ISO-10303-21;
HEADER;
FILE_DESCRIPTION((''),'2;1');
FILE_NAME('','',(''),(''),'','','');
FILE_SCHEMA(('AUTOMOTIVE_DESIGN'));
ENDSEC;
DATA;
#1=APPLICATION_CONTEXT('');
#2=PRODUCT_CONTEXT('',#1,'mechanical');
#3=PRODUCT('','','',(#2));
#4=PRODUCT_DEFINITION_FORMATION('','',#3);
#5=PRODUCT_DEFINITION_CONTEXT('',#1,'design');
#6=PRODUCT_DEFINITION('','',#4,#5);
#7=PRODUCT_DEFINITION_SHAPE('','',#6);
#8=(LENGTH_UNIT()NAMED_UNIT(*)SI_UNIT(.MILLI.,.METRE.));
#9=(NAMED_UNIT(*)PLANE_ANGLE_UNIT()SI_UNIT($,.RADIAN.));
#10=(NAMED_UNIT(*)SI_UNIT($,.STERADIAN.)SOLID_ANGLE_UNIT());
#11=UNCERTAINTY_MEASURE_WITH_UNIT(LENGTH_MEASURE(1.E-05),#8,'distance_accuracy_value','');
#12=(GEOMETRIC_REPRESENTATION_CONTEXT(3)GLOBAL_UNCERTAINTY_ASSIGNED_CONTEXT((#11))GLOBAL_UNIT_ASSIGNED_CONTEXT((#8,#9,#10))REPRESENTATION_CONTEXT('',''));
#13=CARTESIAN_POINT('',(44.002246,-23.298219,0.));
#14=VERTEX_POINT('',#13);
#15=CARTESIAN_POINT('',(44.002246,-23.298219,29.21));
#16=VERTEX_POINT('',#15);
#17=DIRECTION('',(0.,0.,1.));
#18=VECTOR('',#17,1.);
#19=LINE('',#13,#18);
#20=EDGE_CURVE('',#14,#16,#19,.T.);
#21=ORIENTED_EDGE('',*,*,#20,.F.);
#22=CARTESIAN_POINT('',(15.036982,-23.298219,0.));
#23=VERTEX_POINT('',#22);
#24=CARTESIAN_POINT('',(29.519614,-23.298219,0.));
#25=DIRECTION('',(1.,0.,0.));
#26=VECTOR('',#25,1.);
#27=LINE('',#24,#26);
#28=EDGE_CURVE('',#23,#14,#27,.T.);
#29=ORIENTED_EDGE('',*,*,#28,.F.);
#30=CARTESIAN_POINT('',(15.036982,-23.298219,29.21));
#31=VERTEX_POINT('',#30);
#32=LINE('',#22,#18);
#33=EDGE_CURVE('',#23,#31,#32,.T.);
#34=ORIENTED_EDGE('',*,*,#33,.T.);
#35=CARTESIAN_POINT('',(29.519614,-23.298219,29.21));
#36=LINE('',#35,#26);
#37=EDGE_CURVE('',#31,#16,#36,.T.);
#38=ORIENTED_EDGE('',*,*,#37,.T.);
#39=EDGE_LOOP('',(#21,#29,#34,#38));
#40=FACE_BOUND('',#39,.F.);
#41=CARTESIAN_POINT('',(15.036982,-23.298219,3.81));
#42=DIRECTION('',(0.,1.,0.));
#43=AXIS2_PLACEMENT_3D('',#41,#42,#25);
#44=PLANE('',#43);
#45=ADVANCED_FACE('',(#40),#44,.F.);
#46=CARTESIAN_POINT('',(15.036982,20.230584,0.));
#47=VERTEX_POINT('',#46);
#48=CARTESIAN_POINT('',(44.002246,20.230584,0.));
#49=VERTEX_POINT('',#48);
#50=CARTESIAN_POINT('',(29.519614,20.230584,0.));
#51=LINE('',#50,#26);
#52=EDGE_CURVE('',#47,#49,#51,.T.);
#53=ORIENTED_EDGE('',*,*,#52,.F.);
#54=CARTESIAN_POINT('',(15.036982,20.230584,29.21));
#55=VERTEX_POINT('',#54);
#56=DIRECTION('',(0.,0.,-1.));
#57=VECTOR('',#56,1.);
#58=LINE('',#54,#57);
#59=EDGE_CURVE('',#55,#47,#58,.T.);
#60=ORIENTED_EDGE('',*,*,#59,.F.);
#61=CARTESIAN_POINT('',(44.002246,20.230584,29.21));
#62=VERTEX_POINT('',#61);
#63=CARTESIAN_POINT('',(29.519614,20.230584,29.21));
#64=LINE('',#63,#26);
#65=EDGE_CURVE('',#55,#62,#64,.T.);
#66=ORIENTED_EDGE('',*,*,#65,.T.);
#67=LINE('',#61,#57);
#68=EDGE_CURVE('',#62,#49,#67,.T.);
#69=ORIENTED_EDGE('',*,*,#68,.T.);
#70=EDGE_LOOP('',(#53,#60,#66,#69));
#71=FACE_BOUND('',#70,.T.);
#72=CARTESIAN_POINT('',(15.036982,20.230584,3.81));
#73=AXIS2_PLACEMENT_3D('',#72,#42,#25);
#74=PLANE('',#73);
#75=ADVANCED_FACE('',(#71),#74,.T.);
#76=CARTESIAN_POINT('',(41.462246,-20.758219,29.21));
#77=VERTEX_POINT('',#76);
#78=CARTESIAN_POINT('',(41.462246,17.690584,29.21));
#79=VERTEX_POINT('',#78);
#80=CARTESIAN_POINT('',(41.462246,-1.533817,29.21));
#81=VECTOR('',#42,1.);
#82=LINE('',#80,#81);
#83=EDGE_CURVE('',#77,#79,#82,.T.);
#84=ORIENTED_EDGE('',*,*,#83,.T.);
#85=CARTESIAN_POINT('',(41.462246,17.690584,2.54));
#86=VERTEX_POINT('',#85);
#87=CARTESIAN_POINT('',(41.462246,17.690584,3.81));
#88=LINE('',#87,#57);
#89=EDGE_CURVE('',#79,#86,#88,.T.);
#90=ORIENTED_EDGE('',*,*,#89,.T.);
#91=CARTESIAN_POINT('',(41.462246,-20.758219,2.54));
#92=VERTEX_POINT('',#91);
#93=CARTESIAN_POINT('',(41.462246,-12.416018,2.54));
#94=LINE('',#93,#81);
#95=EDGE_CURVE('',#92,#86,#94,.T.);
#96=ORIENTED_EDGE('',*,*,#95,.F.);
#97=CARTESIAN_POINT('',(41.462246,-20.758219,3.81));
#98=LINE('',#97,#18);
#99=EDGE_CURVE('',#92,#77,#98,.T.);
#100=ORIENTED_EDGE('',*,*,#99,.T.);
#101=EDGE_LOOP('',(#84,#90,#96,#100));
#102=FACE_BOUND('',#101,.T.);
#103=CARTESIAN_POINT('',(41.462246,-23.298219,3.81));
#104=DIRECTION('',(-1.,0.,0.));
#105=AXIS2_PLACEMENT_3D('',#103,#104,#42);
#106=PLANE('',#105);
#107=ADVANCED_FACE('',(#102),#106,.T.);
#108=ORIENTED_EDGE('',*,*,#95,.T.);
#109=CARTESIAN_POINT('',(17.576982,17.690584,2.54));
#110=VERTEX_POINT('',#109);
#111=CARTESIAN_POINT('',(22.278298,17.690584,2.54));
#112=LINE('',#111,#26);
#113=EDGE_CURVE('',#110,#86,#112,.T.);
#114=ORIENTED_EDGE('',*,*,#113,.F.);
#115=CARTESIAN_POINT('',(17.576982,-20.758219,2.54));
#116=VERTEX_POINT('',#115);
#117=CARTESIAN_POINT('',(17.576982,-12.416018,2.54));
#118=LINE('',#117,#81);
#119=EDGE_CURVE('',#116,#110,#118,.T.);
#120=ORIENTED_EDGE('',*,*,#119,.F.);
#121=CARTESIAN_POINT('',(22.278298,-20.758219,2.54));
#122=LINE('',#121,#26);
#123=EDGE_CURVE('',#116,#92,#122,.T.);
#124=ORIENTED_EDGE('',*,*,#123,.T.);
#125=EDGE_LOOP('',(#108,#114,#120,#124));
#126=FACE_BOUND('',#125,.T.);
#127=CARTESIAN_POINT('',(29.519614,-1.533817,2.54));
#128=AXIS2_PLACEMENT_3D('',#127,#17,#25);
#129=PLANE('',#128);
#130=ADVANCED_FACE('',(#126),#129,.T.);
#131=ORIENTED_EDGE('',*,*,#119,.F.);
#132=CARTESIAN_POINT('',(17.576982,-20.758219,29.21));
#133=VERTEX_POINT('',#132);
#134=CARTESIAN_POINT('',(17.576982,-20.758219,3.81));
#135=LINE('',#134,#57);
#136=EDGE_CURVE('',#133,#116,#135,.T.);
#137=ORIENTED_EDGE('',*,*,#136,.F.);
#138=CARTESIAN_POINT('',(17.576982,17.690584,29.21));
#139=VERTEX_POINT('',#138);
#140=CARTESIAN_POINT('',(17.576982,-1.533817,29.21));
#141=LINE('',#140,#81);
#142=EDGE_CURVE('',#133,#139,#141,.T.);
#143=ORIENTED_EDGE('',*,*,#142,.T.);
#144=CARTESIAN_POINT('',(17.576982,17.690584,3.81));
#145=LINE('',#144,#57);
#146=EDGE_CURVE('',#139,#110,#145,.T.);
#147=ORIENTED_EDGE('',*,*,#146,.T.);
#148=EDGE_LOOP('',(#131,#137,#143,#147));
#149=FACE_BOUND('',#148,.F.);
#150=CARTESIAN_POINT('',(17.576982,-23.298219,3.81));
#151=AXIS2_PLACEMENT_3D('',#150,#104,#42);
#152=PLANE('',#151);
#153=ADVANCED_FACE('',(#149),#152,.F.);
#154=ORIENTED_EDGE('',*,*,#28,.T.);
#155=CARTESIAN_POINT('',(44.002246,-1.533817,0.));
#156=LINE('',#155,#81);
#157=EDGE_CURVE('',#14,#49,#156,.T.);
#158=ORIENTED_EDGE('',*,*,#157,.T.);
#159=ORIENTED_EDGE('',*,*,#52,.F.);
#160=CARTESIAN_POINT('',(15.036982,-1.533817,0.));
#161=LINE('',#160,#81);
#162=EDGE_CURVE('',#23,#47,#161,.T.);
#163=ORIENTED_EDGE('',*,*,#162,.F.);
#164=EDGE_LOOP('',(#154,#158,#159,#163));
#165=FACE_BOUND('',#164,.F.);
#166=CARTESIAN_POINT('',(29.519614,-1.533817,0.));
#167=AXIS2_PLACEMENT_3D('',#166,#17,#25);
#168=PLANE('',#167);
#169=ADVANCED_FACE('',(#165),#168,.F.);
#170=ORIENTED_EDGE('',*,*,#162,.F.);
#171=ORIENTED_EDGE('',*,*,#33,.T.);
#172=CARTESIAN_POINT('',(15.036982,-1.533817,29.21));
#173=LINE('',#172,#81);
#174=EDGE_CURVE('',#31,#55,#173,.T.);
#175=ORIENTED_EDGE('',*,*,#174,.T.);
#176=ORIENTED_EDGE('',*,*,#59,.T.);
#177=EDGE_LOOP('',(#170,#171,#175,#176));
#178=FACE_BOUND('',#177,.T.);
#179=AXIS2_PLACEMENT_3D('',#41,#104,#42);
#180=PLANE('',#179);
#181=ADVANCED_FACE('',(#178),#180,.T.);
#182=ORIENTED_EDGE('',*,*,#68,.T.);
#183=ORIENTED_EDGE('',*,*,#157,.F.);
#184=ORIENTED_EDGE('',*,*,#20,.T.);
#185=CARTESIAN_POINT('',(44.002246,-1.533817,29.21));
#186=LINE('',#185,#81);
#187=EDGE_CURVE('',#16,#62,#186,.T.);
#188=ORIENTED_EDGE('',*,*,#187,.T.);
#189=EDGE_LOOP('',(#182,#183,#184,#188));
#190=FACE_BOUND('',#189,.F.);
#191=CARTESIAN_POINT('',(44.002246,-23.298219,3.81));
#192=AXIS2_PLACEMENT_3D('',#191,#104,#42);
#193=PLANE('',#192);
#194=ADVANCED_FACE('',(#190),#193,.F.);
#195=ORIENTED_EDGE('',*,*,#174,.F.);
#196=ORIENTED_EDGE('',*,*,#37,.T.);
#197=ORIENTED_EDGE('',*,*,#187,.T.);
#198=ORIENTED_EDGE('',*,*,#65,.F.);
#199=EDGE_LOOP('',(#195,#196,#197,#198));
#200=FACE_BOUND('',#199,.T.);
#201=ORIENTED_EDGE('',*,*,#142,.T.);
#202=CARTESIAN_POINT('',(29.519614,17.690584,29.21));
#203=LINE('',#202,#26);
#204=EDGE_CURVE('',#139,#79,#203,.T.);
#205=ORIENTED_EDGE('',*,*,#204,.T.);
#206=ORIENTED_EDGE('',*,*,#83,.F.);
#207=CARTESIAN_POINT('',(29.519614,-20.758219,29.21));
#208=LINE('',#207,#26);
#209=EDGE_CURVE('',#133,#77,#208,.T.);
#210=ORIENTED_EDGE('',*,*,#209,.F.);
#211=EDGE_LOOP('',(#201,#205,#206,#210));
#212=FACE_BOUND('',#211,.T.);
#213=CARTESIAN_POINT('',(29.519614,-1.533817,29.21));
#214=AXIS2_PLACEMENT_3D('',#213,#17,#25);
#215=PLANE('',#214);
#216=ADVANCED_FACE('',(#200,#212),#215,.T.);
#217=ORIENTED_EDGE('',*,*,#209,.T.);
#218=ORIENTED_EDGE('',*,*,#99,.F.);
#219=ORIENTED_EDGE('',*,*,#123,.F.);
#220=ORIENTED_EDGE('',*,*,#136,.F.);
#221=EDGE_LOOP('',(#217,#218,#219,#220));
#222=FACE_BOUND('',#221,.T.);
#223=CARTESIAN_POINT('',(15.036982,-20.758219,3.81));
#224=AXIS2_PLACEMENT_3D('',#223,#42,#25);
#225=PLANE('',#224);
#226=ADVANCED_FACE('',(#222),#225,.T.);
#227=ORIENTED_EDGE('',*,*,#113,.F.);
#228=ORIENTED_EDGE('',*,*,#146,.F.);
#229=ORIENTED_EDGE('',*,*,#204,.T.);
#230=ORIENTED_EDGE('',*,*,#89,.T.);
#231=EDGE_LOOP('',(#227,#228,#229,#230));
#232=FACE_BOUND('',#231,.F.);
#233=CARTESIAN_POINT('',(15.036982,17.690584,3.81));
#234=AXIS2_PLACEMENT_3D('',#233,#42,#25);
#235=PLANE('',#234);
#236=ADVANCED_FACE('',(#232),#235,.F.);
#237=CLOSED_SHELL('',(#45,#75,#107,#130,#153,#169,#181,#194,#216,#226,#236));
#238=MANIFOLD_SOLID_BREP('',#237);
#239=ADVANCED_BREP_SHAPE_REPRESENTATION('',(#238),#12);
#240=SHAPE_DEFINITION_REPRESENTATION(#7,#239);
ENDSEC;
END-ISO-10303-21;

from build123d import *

# Parameters (mm, degrees)
F1_W     = 28.9652645588
F1_H     = 43.5288026929
F2_DEPTH = 3.81
F3_DEPTH = 25.4
F4_T     = -2.54


# Not quite as in the source:
# - a feature of the source that left no trace in its solid (it failed there, or was rolled back) is left out


with BuildPart() as f2:
    # F1 (on Top) → F2 (new body)
    with BuildSketch(Plane.XY):
        with Locations((29.5196138322, -1.5338174999)):
            Rectangle(F1_W, F1_H)
    extrude(amount=F2_DEPTH)

    # F3 (add): a face of the model
    f3_faces = [f2.faces().sort_by_distance(p)[0] for p in [
        (29.5196138322, -1.5338174999, 3.81),
    ]]
    extrude(f3_faces, amount=F3_DEPTH)

    # F4
    f4_openings = [f2.faces().sort_by_distance(p)[0] for p in [
        (29.519614, -1.533817, 29.21),
    ]]
    offset(amount=F4_T, openings=f4_openings)


solid = f2.part
